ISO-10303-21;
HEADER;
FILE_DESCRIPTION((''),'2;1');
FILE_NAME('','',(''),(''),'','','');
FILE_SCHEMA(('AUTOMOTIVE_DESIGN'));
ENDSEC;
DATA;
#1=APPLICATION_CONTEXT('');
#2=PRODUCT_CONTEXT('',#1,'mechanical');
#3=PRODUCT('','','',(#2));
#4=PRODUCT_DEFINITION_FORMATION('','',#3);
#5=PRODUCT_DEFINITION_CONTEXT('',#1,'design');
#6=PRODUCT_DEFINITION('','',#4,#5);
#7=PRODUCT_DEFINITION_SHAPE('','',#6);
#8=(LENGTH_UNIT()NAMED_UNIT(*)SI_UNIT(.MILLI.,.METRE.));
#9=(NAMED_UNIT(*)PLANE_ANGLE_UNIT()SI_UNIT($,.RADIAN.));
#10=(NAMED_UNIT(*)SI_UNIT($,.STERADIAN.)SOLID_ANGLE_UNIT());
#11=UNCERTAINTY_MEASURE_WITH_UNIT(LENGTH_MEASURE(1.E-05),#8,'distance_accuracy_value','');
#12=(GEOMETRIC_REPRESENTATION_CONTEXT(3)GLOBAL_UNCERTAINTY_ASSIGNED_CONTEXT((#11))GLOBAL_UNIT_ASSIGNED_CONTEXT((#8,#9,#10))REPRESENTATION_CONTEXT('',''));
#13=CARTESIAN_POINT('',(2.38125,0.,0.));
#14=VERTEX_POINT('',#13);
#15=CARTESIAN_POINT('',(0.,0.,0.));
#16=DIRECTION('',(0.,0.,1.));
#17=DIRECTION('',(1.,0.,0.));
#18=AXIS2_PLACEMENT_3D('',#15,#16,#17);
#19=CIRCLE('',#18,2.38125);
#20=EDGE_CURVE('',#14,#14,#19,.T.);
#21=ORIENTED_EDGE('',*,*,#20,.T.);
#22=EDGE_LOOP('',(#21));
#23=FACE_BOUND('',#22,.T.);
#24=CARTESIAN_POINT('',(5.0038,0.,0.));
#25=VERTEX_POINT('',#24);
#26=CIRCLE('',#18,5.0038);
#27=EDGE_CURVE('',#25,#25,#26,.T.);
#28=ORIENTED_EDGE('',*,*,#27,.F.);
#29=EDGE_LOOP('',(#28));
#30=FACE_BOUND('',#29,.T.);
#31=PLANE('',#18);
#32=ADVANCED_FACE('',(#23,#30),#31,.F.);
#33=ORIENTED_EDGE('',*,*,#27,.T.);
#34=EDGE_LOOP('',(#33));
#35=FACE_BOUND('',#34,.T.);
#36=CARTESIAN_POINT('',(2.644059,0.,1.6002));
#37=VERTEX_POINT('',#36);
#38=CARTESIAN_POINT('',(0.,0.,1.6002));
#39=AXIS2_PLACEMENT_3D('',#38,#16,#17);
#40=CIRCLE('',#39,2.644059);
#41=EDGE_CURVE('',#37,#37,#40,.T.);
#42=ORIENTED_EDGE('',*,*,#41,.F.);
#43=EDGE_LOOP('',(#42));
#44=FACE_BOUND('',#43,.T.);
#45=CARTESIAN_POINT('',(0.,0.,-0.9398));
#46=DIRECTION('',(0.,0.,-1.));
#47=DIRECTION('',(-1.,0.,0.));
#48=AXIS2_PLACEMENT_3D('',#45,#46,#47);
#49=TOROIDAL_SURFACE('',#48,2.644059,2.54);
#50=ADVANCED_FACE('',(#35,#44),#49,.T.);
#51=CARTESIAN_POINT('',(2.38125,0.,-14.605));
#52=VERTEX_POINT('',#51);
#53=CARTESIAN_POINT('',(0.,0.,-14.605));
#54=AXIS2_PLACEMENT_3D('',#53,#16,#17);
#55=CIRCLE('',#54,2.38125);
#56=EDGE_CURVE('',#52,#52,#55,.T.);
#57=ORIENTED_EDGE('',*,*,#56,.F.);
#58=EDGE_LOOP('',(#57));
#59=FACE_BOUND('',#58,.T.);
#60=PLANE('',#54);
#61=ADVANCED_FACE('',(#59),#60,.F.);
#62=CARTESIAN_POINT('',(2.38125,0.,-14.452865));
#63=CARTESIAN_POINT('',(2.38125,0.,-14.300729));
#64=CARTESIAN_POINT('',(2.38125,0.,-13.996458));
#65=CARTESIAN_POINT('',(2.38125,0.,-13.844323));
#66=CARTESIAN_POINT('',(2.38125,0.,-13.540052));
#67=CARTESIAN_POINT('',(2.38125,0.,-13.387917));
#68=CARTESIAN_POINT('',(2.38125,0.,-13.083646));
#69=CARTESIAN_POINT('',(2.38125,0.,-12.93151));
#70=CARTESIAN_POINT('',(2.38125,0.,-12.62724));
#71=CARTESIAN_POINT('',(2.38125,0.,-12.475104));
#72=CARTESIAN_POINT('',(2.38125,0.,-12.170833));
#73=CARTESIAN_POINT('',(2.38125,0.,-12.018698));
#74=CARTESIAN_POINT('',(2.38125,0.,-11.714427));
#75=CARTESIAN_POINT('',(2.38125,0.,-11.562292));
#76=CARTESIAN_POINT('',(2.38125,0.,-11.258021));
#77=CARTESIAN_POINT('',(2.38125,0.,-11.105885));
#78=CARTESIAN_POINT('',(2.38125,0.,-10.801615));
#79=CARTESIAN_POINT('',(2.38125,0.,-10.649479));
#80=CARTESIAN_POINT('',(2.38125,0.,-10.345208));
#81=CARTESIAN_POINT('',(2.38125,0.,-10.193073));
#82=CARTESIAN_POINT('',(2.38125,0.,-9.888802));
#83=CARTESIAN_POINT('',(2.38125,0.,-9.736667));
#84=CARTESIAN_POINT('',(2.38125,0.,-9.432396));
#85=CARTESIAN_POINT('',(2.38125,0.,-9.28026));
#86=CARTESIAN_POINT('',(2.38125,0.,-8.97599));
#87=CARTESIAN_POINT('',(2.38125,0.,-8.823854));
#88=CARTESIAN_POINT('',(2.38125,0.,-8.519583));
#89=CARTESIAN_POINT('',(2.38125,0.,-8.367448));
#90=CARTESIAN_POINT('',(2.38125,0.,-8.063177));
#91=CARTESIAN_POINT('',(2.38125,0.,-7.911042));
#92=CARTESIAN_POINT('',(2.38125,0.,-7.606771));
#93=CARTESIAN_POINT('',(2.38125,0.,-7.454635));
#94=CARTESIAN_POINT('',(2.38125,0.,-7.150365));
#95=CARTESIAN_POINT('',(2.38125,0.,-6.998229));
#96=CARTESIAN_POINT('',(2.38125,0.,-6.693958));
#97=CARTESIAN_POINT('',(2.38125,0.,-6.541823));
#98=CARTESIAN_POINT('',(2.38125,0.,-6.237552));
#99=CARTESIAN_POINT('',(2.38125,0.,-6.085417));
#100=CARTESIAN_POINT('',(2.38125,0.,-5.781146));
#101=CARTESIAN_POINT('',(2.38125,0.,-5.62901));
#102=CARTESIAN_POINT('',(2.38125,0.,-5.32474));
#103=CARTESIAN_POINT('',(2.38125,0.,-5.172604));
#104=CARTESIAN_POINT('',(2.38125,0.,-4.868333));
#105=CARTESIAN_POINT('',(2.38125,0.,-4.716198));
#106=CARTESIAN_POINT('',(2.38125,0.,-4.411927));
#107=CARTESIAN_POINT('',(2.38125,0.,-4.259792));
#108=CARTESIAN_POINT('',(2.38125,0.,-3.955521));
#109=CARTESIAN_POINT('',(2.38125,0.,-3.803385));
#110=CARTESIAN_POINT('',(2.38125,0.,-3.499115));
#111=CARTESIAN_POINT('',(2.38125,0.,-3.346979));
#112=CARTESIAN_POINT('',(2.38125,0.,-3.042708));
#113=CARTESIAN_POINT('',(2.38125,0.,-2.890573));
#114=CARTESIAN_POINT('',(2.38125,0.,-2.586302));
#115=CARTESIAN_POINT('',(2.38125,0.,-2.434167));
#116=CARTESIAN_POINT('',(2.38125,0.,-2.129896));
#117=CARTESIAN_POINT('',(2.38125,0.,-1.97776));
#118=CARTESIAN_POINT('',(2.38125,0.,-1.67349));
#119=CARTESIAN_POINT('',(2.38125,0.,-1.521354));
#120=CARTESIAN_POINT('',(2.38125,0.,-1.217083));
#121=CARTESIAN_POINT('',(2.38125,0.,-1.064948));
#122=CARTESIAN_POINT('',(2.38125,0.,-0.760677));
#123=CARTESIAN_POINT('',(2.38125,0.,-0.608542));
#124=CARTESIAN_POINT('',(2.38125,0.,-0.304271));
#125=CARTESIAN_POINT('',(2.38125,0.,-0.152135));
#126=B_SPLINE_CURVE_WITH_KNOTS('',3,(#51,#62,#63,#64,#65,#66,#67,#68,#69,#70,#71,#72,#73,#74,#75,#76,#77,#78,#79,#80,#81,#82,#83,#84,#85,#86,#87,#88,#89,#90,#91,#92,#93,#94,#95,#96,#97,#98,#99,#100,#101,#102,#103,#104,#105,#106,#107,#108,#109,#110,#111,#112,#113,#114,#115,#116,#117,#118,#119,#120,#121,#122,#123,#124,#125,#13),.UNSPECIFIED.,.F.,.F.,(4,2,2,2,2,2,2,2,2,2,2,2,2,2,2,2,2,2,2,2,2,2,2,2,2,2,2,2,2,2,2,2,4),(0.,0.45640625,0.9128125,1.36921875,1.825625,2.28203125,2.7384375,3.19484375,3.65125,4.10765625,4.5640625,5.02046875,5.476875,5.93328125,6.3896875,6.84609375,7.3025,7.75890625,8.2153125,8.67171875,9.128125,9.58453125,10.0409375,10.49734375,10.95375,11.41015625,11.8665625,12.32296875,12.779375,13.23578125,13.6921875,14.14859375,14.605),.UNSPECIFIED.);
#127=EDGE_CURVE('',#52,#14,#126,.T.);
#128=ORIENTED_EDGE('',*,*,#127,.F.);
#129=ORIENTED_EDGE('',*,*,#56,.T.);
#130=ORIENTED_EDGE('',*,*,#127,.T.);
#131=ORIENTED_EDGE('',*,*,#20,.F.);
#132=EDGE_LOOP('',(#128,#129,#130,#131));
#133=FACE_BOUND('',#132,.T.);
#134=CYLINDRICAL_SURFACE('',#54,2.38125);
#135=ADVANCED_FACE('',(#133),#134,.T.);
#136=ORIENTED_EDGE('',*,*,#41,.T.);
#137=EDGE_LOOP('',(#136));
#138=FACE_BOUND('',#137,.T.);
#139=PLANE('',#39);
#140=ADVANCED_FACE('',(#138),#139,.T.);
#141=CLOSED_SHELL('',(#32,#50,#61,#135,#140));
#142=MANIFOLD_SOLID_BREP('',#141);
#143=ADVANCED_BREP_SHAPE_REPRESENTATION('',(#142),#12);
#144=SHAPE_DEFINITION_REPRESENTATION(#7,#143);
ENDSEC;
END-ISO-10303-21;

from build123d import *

# Parameters (mm, degrees)
SKETCH1_R           = 5.0038
BOSS_EXTRUDE1_DEPTH = 1.6002
SKETCH2_R           = 2.38125
BOSS_EXTRUDE2_DEPTH = 14.605
FILLET1_R           = 2.54


with BuildPart() as part:
    # Sketch1 → Boss-Extrude1 (new body)
    with BuildSketch(Plane.XY):
        Circle(SKETCH1_R)
    extrude(amount=BOSS_EXTRUDE1_DEPTH)

    # Sketch2 → Boss-Extrude2 (add)
    with BuildSketch(Plane.XY):
        Circle(SKETCH2_R)
    extrude(amount=-BOSS_EXTRUDE2_DEPTH)

    # Fillet1
    # the kernel refuses this fillet: 2.54 mm, written as the material it takes off along each edge
    with BuildSketch(Plane(origin=(0, 0, 1.6002), x_dir=(1, 0, 0), z_dir=(0, -1, 0))) as fillet1_piece_1:
        with BuildLine():
            CenterArc((2.644059345, -2.54), FILLET1_R, 21.715617283, 68.284382717)
            Line((2.644059345, 0), (2.644059345, 0.0508))
            Line((2.644059345, 0.0508), (5.0038, 0.0508))
            Line((5.0038, 0.0508), (5.0546, 0))
            ThreePointArc((5.0546, 0), (5.0546, -0.8001), (5.050994813, -1.581404))
            Line((5.050994813, -1.581404), (5.0038, -1.6002))
        make_face()
    revolve(axis=Axis((0, 0, 1.6002), (0, 0, 1)), mode=Mode.SUBTRACT)


solid = part.part
